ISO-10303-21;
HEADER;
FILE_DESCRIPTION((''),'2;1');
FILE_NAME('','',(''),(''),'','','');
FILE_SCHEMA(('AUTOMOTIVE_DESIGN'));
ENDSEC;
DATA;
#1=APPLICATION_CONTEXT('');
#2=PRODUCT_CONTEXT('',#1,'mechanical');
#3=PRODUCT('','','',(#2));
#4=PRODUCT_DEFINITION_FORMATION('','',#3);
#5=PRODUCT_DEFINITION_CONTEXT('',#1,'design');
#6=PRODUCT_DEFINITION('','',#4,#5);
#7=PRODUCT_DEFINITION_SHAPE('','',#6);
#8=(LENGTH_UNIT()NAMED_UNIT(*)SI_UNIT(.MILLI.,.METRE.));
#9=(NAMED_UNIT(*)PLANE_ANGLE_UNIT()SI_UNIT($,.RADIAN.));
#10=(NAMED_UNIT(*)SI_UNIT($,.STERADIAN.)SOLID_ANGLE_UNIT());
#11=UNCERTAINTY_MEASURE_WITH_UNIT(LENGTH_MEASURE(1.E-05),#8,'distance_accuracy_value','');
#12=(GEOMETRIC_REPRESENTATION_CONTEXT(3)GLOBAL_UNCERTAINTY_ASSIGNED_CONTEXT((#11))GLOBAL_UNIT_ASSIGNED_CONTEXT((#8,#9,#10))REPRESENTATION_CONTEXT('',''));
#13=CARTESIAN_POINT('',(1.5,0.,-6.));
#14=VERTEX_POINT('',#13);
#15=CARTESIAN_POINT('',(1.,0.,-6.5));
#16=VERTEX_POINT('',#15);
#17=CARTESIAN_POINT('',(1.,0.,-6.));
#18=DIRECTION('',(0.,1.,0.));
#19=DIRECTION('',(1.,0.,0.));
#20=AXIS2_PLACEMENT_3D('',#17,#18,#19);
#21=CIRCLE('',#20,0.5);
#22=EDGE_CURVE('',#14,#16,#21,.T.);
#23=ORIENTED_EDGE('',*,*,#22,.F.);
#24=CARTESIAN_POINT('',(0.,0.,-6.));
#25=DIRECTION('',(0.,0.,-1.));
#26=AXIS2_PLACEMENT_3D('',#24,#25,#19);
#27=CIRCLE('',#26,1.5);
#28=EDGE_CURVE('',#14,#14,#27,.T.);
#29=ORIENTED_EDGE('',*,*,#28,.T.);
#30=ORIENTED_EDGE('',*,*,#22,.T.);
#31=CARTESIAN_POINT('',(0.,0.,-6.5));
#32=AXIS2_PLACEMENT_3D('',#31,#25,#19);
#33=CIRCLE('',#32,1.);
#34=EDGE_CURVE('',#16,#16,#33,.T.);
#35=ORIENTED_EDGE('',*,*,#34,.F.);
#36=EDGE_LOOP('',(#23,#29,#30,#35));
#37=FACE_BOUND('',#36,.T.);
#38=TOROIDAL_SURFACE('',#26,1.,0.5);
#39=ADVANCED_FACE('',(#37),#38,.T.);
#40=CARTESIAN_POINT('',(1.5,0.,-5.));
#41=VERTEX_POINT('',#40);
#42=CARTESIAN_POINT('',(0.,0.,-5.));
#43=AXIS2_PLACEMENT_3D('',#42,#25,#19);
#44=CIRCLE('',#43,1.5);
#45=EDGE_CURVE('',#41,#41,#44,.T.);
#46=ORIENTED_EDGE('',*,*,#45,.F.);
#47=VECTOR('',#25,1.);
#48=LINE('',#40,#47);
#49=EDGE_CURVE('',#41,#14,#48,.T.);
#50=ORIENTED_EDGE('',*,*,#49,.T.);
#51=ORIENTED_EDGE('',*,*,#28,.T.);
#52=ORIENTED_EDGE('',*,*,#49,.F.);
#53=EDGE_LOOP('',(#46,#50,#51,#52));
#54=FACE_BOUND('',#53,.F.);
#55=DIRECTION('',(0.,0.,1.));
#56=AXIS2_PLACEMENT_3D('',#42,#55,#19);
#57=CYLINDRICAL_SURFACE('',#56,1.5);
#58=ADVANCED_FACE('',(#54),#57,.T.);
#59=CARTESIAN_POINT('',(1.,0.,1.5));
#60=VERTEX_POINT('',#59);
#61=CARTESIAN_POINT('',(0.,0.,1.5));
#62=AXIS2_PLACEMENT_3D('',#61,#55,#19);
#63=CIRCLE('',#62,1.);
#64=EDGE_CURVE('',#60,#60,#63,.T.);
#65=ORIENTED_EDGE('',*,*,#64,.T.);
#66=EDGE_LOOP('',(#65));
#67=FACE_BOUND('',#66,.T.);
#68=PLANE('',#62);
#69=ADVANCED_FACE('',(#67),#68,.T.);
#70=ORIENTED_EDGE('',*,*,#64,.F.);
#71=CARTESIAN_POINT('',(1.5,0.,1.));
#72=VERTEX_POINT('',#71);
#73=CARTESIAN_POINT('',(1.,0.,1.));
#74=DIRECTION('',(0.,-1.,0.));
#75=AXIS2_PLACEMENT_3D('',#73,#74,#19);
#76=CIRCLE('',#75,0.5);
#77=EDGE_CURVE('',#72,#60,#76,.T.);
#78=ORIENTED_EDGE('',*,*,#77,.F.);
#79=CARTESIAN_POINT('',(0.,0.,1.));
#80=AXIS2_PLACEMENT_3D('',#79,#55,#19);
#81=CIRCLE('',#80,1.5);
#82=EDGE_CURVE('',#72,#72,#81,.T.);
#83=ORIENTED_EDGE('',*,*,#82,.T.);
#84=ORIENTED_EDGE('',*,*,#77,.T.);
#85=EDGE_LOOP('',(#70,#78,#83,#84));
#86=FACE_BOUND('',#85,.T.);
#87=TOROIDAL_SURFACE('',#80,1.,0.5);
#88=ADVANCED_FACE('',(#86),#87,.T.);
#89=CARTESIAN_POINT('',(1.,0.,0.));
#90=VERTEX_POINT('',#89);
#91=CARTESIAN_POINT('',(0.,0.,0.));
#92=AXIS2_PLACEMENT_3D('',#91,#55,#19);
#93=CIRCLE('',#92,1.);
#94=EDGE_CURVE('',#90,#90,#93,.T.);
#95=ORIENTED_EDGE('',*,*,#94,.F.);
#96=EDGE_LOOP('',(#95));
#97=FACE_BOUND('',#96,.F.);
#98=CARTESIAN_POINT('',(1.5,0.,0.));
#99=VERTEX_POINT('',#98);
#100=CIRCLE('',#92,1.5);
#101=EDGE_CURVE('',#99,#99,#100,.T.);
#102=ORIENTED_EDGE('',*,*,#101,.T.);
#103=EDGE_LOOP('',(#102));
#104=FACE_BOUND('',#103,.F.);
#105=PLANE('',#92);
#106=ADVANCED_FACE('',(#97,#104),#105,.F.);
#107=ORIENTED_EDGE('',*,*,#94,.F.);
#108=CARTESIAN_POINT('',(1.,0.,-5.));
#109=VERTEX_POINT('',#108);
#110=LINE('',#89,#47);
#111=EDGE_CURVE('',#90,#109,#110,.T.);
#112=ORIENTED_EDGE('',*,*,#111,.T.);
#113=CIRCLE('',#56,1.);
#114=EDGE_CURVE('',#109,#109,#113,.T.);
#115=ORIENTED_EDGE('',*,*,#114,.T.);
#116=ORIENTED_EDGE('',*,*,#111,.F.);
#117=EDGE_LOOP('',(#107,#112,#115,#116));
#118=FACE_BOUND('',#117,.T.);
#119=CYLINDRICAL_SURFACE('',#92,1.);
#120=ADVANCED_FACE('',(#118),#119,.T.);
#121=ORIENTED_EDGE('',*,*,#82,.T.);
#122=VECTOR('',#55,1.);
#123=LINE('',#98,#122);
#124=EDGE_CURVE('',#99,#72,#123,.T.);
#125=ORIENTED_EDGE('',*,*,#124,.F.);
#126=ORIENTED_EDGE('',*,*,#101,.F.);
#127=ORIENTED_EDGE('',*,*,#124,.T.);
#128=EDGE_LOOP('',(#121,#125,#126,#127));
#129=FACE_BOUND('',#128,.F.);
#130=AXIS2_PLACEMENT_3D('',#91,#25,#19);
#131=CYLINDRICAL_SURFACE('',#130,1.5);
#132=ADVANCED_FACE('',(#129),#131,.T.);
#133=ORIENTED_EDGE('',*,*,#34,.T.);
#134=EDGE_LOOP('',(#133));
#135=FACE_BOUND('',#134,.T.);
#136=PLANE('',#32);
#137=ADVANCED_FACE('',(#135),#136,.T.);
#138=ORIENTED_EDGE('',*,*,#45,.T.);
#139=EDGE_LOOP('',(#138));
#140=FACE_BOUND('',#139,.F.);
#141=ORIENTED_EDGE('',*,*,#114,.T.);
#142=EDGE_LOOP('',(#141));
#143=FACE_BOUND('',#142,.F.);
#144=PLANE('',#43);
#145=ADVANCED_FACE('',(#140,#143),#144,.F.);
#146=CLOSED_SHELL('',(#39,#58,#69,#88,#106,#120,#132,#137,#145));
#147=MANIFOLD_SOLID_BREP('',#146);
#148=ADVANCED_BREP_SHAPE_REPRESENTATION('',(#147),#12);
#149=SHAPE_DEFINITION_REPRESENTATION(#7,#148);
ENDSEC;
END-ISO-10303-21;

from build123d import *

# Parameters (mm, degrees)
F0_R     = 1
F1_DEPTH = 5
F2_R     = 1.5
F3_DEPTH = 1.5
F4_R     = 0.5
F5_R     = 1.5
F5_R_2   = 1
F6_DEPTH = 1.5
F7_R     = 0.5


with BuildPart() as f1:
    # F0 (on Top) → F1 (new body)
    with BuildSketch(Plane.XY):
        Circle(F0_R)
    extrude(amount=-F1_DEPTH)

    # F2 (on face) → F3 (join)
    with BuildSketch(Plane.XY):
        Circle(F2_R)
    extrude(amount=F3_DEPTH)

    # F4
    f4_edges = [f1.edges().sort_by_distance(p)[0] for p in [
        (-1.5, 0, 1.5),
    ]]
    fillet(f4_edges, radius=F4_R)

    # F5 (on face) → F6 (join)
    with BuildSketch(Plane(origin=(0, 0, -5), x_dir=(1, 0, 0), z_dir=(0, 0, -1))):
        Circle(F5_R)
        Circle(F5_R_2, mode=Mode.SUBTRACT)
        Circle(F5_R_2)
    extrude(amount=F6_DEPTH)

    # F7
    f7_edges = [f1.edges().sort_by_distance(p)[0] for p in [
        (-1.5, 0, -6.5),
    ]]
    fillet(f7_edges, radius=F7_R)


solid = f1.part
